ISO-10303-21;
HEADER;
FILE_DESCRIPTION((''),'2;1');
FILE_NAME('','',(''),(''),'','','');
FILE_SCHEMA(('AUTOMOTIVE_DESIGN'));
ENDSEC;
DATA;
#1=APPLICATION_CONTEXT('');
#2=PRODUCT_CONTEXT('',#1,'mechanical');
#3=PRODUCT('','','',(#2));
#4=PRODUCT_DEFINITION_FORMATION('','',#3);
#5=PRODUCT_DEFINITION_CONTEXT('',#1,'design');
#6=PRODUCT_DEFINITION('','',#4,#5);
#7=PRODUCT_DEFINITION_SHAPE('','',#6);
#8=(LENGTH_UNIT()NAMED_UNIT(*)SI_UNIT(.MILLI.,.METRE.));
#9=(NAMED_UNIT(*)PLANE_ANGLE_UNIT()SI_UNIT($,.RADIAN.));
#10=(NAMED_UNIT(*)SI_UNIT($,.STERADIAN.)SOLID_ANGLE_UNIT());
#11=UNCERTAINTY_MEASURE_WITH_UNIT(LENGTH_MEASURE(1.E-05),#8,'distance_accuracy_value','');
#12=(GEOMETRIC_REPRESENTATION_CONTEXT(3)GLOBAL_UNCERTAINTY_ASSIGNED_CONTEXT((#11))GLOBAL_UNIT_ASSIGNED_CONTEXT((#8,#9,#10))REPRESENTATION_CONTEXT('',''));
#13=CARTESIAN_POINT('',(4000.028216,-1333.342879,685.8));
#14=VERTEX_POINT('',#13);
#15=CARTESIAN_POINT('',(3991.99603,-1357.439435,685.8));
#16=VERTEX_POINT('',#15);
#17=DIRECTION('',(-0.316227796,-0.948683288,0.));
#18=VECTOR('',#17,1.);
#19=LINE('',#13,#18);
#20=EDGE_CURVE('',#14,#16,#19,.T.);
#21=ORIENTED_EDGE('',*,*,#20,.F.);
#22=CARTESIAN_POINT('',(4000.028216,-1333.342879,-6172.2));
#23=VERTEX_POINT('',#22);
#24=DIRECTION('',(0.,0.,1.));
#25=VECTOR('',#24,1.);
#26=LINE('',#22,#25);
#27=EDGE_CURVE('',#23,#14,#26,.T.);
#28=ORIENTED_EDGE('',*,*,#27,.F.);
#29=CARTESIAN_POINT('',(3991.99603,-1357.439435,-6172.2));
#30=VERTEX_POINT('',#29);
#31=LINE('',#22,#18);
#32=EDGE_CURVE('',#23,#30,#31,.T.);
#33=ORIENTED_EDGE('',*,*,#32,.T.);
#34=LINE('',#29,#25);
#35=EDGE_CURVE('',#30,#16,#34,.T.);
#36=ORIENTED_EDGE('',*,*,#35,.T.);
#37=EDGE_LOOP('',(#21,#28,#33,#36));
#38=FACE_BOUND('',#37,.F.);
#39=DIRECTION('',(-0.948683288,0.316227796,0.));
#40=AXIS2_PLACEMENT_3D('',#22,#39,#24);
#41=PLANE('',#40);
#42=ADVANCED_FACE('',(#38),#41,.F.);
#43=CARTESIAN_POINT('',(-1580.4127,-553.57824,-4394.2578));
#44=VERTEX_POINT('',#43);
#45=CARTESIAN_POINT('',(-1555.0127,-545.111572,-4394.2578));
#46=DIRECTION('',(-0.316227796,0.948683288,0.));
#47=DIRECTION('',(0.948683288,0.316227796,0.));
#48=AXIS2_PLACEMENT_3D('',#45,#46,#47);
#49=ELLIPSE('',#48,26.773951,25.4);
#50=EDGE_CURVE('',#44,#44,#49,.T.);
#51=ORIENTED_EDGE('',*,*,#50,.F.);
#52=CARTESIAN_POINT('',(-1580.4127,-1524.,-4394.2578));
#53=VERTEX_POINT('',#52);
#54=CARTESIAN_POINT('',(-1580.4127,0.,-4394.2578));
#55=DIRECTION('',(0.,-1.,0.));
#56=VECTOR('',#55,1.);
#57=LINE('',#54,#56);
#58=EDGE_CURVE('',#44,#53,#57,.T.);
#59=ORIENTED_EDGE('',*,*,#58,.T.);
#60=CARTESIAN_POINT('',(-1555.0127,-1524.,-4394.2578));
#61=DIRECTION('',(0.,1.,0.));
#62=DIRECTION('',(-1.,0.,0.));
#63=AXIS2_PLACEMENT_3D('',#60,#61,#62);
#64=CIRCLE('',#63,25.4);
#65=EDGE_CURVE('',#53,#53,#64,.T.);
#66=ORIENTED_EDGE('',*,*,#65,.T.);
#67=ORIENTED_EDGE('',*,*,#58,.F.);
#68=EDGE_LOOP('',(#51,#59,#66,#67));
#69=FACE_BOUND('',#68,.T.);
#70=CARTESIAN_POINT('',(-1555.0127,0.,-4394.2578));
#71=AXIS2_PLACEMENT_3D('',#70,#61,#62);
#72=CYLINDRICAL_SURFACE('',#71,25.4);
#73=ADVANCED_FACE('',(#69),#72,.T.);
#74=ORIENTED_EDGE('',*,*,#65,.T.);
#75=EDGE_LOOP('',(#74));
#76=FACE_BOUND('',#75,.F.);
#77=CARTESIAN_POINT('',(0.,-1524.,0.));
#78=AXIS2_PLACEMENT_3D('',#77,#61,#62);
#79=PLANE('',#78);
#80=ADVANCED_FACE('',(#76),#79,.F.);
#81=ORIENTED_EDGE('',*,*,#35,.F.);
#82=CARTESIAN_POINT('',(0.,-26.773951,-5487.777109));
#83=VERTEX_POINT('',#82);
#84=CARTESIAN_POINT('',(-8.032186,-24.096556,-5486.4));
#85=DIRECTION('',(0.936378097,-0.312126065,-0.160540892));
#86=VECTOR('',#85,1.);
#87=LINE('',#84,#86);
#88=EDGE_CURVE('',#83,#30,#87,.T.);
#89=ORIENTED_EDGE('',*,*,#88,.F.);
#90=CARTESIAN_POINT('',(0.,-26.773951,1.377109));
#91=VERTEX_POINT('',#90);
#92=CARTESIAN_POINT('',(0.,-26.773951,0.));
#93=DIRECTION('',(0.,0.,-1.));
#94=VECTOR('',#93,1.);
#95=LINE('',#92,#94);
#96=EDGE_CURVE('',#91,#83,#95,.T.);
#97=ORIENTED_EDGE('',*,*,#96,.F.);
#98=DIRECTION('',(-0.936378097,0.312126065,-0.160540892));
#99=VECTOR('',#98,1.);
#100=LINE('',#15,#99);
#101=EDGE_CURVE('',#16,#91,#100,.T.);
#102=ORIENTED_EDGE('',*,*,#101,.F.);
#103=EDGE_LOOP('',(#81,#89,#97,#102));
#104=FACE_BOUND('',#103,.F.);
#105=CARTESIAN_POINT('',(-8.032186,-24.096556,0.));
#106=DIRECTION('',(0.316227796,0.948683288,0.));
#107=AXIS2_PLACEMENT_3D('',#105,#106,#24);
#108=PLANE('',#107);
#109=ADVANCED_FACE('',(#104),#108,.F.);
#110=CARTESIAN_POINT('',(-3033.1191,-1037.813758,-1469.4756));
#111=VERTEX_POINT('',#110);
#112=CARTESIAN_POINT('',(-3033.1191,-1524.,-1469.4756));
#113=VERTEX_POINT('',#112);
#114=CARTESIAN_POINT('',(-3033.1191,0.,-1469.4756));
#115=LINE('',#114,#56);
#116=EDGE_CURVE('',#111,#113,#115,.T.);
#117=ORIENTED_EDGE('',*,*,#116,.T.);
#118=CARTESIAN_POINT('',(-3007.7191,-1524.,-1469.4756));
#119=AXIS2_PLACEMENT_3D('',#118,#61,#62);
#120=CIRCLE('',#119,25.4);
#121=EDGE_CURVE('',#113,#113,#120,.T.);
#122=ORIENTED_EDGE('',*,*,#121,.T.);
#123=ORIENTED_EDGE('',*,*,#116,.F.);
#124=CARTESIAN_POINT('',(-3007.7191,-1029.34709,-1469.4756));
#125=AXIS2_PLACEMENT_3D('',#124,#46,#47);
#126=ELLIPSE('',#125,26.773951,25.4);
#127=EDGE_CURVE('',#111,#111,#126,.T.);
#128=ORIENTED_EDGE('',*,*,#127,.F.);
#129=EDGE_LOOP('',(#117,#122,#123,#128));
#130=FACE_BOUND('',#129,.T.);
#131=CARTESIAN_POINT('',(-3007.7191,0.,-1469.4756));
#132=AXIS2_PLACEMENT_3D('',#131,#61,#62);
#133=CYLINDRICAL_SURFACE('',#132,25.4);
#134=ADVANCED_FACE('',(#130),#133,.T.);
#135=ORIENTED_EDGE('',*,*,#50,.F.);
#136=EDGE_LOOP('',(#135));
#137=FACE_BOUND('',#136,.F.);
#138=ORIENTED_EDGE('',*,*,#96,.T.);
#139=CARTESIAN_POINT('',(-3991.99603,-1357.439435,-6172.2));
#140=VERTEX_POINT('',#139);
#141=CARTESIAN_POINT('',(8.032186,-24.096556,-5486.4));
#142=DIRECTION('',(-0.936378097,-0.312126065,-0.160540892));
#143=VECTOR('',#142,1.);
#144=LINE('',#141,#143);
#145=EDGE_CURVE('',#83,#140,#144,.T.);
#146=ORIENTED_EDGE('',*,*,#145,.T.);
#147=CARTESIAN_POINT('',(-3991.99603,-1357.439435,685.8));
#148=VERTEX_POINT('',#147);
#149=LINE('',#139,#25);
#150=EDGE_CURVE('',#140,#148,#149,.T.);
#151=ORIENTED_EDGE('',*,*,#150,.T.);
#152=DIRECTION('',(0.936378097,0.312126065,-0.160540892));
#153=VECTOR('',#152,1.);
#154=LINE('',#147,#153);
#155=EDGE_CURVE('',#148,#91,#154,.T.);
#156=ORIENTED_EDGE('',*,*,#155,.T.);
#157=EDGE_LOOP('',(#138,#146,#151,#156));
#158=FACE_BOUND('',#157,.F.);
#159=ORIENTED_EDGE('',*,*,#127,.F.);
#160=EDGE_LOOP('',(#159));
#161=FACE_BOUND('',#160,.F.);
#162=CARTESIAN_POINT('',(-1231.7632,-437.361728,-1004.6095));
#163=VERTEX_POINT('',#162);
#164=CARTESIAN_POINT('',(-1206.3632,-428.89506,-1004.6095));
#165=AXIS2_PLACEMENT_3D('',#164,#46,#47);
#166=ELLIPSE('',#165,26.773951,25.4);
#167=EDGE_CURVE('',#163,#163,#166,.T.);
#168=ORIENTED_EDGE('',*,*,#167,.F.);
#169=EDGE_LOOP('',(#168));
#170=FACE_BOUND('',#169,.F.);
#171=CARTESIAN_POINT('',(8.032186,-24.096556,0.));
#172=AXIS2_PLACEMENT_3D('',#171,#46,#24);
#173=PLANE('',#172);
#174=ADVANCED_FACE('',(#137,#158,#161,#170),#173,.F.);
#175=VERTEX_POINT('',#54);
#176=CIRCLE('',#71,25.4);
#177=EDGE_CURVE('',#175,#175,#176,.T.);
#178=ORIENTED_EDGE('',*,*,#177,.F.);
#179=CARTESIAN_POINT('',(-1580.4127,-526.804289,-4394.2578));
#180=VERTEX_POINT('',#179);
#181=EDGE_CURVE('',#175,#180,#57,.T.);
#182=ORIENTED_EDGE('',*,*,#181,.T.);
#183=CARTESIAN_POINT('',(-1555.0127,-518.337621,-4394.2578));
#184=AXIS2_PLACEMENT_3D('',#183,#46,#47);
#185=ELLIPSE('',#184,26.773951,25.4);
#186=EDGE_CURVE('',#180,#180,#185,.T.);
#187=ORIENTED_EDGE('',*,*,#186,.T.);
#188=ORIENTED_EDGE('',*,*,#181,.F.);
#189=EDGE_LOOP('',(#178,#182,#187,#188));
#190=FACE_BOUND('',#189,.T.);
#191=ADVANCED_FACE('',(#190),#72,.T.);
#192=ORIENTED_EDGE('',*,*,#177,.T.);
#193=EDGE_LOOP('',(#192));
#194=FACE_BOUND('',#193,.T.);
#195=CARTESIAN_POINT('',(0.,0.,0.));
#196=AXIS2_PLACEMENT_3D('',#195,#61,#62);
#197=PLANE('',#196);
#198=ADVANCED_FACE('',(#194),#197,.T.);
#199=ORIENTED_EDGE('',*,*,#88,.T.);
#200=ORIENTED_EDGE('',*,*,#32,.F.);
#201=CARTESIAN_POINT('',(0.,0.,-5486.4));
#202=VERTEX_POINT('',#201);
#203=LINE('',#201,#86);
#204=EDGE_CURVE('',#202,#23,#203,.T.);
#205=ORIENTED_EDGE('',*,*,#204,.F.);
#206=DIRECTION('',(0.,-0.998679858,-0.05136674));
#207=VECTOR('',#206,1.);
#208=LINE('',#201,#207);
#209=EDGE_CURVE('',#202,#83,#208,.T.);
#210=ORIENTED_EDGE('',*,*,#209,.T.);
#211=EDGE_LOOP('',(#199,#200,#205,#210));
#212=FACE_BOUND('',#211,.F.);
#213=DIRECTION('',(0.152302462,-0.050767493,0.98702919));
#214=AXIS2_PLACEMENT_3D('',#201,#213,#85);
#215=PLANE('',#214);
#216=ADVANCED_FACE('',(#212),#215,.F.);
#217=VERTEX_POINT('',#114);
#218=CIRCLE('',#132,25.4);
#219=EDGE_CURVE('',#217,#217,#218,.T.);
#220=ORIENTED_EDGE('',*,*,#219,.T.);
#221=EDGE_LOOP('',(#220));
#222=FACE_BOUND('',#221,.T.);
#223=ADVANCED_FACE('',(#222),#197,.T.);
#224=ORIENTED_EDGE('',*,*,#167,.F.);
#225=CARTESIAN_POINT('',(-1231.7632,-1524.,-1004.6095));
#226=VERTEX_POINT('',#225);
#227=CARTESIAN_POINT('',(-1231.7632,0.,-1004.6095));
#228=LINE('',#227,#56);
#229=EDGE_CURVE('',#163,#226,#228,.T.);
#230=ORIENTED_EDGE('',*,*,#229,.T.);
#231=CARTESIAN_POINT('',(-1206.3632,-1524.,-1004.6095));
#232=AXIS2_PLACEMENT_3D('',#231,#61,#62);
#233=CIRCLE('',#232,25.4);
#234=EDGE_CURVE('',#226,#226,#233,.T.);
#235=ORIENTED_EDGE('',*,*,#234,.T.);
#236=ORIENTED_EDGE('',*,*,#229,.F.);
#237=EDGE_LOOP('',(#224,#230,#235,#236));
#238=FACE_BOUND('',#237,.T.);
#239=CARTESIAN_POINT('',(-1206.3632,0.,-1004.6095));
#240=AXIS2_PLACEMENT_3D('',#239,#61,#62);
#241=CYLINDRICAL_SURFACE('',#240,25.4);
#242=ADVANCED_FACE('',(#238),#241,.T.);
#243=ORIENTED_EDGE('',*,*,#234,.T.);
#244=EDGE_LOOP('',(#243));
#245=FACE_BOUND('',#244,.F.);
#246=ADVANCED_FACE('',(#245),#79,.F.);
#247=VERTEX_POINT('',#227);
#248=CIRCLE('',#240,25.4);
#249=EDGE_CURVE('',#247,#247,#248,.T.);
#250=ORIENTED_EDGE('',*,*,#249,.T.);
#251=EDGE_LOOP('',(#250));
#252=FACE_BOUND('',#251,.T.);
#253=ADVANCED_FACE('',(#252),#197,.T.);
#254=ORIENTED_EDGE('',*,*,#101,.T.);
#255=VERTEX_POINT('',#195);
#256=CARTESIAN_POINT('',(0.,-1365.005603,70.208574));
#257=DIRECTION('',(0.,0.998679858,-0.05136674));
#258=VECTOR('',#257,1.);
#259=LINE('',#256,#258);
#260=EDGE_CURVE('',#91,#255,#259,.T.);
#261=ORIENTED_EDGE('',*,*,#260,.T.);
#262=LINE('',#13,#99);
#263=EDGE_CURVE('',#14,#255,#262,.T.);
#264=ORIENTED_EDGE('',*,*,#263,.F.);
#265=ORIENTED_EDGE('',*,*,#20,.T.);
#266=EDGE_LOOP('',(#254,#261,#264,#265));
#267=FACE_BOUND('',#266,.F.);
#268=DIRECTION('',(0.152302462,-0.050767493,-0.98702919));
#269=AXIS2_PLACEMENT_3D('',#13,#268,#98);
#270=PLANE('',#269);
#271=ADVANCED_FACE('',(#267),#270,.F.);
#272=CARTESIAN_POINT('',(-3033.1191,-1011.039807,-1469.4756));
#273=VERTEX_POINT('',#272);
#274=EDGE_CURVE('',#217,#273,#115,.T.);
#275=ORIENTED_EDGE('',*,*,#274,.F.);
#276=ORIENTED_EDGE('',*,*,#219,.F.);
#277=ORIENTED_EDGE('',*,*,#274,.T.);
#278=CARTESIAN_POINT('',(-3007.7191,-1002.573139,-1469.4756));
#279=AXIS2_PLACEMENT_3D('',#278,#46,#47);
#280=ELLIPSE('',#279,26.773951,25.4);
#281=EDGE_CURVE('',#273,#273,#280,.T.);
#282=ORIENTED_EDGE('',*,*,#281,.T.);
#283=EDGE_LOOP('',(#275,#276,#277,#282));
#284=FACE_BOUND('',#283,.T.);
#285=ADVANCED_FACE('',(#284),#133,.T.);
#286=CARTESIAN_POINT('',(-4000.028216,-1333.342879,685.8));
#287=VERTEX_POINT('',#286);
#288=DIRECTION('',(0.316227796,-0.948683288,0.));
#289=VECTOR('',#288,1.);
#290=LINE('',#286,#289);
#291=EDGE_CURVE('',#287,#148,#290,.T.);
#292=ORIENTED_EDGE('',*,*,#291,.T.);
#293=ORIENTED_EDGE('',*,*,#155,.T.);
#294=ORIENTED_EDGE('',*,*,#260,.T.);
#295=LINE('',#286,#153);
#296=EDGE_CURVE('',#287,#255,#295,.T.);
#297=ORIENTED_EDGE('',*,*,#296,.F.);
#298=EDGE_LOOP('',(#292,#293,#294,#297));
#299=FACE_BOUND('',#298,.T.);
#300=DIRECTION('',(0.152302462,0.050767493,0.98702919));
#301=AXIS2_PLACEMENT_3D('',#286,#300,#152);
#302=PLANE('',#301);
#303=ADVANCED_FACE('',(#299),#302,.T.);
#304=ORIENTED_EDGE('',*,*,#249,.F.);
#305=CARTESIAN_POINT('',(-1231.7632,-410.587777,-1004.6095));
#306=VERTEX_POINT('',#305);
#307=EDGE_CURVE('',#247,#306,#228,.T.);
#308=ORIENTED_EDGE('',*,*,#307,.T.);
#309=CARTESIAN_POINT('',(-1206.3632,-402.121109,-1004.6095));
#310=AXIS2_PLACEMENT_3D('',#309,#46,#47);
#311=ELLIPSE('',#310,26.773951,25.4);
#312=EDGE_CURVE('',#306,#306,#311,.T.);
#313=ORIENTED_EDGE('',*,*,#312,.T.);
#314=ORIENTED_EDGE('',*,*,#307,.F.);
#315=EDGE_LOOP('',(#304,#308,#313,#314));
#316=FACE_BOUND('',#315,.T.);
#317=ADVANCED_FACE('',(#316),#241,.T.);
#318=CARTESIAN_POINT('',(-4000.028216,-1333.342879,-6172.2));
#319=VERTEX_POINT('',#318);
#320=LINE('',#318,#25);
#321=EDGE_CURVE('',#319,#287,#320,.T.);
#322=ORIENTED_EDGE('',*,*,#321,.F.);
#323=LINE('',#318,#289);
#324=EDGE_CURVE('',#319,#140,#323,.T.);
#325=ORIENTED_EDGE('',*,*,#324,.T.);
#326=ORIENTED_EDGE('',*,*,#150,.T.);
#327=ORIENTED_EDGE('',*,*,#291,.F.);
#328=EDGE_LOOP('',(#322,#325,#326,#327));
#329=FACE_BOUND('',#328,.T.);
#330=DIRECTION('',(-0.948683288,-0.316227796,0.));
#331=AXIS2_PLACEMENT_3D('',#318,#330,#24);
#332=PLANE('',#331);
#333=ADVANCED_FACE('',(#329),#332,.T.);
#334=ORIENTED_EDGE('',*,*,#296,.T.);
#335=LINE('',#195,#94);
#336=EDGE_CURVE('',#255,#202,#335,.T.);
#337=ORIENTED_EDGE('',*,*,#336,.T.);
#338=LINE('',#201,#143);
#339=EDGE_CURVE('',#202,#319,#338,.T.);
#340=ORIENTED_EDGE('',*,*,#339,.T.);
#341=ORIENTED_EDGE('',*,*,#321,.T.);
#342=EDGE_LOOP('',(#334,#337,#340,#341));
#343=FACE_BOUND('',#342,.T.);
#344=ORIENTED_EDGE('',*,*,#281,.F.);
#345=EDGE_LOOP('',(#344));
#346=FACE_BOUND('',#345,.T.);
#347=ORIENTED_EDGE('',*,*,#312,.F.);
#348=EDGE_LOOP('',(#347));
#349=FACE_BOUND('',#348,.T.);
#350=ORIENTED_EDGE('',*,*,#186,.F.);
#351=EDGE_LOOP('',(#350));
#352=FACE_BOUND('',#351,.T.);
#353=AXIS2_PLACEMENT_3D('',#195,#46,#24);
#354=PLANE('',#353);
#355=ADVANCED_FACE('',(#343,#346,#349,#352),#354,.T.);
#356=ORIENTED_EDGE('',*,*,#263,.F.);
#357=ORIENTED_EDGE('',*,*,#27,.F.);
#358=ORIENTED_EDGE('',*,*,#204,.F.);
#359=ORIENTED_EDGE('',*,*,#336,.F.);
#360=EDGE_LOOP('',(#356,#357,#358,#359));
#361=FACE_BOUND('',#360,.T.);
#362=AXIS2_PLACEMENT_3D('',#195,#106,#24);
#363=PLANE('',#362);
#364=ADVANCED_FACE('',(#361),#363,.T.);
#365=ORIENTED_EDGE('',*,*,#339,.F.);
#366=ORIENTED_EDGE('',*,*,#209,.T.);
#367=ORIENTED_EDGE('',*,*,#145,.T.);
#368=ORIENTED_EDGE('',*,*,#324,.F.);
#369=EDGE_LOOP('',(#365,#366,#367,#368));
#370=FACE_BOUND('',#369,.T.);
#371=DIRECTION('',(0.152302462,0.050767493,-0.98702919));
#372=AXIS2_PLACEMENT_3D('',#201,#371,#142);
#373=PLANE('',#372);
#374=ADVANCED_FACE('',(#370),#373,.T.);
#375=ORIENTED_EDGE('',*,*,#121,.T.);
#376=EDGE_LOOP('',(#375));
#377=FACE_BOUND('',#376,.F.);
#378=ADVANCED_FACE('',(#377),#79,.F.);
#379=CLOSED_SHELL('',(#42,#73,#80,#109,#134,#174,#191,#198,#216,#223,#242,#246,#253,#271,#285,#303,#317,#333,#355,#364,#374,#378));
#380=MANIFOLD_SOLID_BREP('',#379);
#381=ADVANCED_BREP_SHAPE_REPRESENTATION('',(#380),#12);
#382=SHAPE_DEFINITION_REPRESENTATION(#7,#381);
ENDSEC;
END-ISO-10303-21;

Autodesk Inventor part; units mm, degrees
ref_plane "YZ Plane" through (0, 0, 0) normal (1, 0, 0) x (0, 1, 0)
ref_plane "Work Plane3" through (0, 0, 0) normal (-0.3162278, 0.9486833, 0) x (0, 0, 1)
sketch "Sketch5" plane through (0, 0, 0) normal (-0.3162278, 0.9486833, 0) x (0, 0, 1)
  line L0 (0, 0) -> (-5486.4, 0)
  line L1 (-5486.4, 0) -> (-6172.2, -4216.4)
  line L2 (-6172.2, -4216.4) -> (685.8, -4216.4)
  line L3 (685.8, -4216.4) -> (0, 0)
  line L4 (-7543.8, 0) -> (2057.4, 0) projected
  dimension "d14" = 5486.4
  dimension "d15" = 4216.4
  dimension "d18" = 6858
ref_plane "Work Plane4" through (0, 0, 0) normal (0.3162278, 0.9486833, 0) x (0, 0, 1)
sketch "Sketch6" plane through (0, 0, 0) normal (0.3162278, 0.9486833, 0) x (0, 0, 1)
  line L0 (0, 0) -> (-5486.4, 0)
  line L1 (-5486.4, 0) -> (-6172.2, 4216.4)
  line L2 (-6172.2, 4216.4) -> (685.8, 4216.4)
  line L3 (685.8, 4216.4) -> (0, 0)
  dimension "d20" = 5486.4
  dimension "d21" = 6858
  dimension "d22" = 4216.4
extrude "Extrusion3" add sketch "Sketch5" against normal blind 25.4
extrude "Extrusion4" add sketch "Sketch6" against normal blind 25.4
sketch "Sketch7" plane through (0, 0, 0) normal (0, 1, 0) x (-1, 0, 0)
  circle A0 centre (1555.0127, -4394.2578) radius 25.4
  circle A1 centre (1206.3632, -1004.6095) radius 25.4
  circle A2 centre (3007.7191, -1469.4756) radius 25.4
  point P0 (0, 0)
  dimension "d27" = 50.8
extrude "Extrusion5" add sketch "Sketch7" against normal blind 1524
equation "\"d14\" = dormerRidgeLineLength"
equation "\"d15\" = dormerRidgeToGarageEave"
equation "\"d18\" = dormerGarageEaveLength"
equation "\"d20\" = dormerRidgeLineLength"
equation "\"d21\" = dormerPoolEaveLength"
equation "\"d22\" = dormerRidgeToPoolEave"
equation "\"pitch_6_12\" = 26.565deg"
equation "\"d11\" = pitch_4_12"
equation "\"pitch_4_12\" = 18.434949deg"
equation "\"dormerRidgeLineLength\" = 5486.4"
equation "\"dormerPoolEaveLength\" = 6858"
equation "\"dormerGarageEaveLength\" = 6858"
equation "\"dormerRidgeToGarageEave\" = 4216.4"
equation "\"d19\" = -pitch_4_12"
equation "\"dormerRidgeToPoolEave\" = 4216.4"
properties part number "houseDormerRoof"
